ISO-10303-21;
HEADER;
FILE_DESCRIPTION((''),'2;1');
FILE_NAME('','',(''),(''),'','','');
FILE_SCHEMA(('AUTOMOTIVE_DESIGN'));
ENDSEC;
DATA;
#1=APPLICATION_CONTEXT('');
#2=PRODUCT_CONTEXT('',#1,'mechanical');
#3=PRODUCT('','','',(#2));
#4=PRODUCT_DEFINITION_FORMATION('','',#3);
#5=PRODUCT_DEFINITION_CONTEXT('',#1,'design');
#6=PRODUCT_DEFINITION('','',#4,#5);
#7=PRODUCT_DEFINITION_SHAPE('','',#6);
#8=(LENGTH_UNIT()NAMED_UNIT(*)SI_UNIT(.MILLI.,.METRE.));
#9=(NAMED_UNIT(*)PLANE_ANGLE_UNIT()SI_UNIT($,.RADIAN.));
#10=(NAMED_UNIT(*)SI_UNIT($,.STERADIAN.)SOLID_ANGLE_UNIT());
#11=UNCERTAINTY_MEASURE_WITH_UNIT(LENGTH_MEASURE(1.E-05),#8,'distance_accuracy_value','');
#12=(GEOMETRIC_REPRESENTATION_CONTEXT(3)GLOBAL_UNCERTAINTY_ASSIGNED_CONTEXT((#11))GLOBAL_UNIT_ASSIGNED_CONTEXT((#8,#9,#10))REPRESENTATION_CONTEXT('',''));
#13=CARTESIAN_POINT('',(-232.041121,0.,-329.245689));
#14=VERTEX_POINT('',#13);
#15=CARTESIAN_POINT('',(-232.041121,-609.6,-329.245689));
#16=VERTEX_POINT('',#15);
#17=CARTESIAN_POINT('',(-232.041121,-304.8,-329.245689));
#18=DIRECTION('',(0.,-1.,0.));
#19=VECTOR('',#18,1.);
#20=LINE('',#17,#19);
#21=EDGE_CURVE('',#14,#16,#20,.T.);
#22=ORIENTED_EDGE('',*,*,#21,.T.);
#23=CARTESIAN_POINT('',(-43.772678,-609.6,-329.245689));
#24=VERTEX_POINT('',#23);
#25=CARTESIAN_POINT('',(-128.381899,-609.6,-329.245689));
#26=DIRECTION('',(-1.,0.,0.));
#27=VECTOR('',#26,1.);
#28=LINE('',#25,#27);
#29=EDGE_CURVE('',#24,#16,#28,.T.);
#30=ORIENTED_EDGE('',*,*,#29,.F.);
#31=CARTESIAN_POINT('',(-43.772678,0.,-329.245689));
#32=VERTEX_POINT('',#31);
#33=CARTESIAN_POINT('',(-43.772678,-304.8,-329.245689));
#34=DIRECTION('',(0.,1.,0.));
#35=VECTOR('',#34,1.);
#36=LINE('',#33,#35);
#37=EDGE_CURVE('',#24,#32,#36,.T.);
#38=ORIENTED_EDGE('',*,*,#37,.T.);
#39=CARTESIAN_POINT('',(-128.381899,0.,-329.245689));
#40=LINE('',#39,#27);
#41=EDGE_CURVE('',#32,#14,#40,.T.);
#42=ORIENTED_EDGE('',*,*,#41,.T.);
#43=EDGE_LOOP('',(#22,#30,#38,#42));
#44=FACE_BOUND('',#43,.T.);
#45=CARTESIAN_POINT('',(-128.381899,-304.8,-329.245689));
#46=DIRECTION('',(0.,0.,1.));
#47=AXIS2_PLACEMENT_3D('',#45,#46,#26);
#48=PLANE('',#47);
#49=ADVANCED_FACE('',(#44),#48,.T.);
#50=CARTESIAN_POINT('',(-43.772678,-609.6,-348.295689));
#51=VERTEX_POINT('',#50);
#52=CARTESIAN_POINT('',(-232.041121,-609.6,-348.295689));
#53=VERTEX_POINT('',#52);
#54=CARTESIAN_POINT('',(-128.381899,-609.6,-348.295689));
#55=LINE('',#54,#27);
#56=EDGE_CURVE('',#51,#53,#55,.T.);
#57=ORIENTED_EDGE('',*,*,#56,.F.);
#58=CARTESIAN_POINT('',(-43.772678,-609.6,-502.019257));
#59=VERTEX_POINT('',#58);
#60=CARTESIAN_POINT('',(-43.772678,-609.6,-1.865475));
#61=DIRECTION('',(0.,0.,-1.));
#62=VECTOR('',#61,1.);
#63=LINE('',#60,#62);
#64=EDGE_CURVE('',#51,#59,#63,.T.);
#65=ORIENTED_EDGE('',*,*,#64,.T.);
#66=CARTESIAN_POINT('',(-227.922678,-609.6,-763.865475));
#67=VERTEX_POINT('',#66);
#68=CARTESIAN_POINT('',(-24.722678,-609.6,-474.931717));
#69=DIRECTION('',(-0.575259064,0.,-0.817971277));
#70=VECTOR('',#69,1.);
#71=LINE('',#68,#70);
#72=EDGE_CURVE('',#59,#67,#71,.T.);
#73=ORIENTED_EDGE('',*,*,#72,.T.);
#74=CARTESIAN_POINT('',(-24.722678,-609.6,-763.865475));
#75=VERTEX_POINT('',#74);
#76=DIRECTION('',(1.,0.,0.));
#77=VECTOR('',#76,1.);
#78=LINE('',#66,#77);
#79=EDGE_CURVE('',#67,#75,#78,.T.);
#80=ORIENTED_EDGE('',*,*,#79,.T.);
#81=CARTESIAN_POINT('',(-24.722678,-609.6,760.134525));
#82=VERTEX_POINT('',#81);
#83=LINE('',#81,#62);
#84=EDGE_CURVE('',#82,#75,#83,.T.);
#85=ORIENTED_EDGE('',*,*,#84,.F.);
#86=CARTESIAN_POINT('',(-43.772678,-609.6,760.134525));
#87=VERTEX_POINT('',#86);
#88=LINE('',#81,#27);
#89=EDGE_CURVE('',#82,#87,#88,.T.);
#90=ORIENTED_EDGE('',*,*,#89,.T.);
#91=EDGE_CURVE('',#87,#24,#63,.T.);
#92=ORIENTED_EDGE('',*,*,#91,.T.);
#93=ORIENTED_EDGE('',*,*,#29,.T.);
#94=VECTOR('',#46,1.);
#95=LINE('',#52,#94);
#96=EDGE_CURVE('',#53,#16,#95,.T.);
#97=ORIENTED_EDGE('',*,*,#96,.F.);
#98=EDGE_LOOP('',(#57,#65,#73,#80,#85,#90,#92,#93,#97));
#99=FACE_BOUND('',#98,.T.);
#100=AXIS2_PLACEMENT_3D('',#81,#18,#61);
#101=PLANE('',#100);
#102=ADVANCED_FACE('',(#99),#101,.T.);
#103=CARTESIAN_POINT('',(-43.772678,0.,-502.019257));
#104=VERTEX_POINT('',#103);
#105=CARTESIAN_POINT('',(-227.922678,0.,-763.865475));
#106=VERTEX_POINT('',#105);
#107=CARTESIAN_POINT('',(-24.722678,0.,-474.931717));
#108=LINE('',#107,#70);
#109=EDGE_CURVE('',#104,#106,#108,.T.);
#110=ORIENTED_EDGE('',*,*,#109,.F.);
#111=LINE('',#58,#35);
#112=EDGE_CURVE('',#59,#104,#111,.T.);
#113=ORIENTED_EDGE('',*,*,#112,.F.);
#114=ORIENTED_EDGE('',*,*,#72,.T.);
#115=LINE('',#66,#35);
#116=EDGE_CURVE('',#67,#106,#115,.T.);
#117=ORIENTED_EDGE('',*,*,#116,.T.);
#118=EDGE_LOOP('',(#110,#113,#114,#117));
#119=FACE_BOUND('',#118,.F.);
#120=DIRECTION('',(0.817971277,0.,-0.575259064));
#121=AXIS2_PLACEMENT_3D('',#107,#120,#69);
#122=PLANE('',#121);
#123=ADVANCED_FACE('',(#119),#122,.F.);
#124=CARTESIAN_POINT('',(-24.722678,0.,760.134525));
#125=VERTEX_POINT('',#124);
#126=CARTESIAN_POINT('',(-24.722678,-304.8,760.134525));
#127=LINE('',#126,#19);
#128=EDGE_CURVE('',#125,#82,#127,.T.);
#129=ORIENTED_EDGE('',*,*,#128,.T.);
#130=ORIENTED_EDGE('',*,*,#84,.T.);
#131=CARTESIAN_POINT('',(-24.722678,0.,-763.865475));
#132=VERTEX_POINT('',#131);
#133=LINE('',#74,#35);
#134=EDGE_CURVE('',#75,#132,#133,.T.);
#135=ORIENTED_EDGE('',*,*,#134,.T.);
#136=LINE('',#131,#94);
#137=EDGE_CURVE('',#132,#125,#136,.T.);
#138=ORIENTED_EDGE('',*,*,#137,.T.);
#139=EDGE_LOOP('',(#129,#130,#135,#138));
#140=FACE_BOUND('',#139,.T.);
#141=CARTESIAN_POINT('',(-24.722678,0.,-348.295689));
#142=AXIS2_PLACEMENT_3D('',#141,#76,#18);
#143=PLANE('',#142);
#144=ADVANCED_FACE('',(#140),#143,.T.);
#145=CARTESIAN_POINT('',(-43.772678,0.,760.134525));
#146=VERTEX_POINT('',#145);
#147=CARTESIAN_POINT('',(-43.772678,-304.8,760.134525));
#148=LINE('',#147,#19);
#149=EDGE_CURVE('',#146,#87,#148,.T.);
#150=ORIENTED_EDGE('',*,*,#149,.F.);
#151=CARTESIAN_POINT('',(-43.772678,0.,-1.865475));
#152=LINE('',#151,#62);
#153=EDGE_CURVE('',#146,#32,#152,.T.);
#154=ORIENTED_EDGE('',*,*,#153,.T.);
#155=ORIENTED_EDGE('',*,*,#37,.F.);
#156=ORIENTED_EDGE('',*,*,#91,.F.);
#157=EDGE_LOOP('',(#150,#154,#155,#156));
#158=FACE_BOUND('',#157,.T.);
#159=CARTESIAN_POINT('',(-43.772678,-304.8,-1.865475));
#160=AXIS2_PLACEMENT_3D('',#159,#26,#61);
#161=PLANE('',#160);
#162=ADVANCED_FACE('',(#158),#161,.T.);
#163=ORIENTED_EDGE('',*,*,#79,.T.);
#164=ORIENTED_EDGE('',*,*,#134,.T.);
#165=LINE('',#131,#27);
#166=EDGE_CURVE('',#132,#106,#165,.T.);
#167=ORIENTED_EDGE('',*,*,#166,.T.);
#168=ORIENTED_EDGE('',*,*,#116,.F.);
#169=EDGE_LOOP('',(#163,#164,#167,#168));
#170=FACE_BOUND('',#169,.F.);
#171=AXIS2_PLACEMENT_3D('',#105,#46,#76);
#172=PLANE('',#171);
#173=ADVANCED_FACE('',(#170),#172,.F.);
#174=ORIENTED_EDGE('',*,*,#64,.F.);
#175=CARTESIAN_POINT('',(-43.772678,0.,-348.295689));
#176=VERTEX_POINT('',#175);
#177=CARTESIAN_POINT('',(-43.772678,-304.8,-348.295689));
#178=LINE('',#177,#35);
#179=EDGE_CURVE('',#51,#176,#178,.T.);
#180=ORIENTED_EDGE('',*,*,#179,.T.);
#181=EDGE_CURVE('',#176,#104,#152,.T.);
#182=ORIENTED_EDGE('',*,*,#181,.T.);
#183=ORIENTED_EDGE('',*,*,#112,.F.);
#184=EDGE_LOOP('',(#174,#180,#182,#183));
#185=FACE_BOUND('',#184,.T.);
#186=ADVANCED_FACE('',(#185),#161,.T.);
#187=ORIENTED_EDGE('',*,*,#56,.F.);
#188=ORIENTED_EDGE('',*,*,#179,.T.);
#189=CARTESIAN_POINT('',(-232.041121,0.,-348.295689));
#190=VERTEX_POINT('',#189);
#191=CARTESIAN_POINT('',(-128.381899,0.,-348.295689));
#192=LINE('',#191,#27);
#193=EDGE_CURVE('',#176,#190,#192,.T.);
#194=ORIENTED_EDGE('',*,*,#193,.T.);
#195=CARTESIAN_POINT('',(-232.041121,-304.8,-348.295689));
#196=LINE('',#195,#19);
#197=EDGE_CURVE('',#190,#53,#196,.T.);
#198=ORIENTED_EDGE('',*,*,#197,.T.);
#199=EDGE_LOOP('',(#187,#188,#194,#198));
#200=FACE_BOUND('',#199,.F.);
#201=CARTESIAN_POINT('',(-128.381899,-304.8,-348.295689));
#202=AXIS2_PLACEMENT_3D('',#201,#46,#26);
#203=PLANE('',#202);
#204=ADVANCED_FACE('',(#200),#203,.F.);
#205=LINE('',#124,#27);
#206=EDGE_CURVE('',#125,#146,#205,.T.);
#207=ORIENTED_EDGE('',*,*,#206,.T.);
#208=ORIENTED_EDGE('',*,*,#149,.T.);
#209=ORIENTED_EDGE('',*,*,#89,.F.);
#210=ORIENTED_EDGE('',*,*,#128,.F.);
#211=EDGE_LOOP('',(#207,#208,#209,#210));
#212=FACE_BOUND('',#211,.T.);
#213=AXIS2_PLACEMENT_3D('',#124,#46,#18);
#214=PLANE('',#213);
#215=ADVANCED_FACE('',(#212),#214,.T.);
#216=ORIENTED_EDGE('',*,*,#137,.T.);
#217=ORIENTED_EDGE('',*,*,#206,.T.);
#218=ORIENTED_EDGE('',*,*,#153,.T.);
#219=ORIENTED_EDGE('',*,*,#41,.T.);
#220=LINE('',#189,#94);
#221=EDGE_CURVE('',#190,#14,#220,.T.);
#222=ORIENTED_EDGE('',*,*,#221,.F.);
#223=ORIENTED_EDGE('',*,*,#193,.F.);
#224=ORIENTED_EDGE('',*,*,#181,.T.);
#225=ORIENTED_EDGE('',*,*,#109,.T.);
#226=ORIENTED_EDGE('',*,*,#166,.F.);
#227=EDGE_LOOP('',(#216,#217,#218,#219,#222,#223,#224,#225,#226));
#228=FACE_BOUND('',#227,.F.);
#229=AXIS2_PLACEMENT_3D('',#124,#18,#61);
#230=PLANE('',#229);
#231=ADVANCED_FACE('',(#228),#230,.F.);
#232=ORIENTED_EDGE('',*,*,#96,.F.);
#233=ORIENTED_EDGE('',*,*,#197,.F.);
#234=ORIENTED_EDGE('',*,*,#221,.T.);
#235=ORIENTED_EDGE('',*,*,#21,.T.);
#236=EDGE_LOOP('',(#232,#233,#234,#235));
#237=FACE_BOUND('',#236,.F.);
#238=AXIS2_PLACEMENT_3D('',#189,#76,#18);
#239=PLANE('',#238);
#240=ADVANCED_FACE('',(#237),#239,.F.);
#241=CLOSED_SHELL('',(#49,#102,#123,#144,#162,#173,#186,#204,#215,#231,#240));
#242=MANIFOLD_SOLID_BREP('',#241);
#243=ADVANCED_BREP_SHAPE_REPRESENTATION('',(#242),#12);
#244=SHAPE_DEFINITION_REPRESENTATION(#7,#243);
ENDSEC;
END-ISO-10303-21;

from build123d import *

# Parameters (mm, degrees)
F1_DEPTH = 19.05
F2_DEPTH = 609.6
F3_E0_W  = 1524
F3_E0_H  = 609.6
F4_DEPTH = 19.05
F5_DEPTH = 25.4
F6_E4_W  = 207.3184425354
F6_E4_H  = 609.6
F7_DEPTH = 19.05


with BuildPart() as f1:
    # F0 (on Front) → F1 (new body)
    with BuildSketch(Plane.XZ):
        Polygon((-24.7226779938, -763.8654754907), (-24.7226779938, -474.9317169189), (-227.9226779938, -763.8654754907), align=None)
    extrude(amount=F1_DEPTH)

    # F0 (on Front) → F2 (join)
    with BuildSketch(Plane.XZ):
        Polygon((-24.7226779938, -763.8654754907), (-24.7226779938, -474.9317169189), (-227.9226779938, -763.8654754907), align=None)
    extrude(amount=F2_DEPTH)

    # F3_E0 (on explicit) → F4 (join)
    with BuildSketch(Plane(origin=(-24.7226779938, 0, 760.1345245093), x_dir=(0, 0, -1), z_dir=(-1, 0, 0))):
        with Locations((762, 304.8)):
            Rectangle(F3_E0_W, F3_E0_H)
    extrude(amount=F4_DEPTH)

    # F0 (on Front) → F5 (join)
    with BuildSketch(Plane.XZ):
        Polygon((-24.7226779938, -763.8654754907), (-24.7226779938, -474.9317169189), (-227.9226779938, -763.8654754907), align=None)
    extrude(amount=F5_DEPTH)

    # F6_E4 (on explicit) → F7 (join)
    with BuildSketch(Plane(origin=(-24.7226779938, 0, -348.2956886292), x_dir=(-1, 0, 0), z_dir=(0, 0, 1))):
        with Locations((103.6592212677, 304.8)):
            Rectangle(F6_E4_W, F6_E4_H)
    extrude(amount=F7_DEPTH)


solid = f1.part
